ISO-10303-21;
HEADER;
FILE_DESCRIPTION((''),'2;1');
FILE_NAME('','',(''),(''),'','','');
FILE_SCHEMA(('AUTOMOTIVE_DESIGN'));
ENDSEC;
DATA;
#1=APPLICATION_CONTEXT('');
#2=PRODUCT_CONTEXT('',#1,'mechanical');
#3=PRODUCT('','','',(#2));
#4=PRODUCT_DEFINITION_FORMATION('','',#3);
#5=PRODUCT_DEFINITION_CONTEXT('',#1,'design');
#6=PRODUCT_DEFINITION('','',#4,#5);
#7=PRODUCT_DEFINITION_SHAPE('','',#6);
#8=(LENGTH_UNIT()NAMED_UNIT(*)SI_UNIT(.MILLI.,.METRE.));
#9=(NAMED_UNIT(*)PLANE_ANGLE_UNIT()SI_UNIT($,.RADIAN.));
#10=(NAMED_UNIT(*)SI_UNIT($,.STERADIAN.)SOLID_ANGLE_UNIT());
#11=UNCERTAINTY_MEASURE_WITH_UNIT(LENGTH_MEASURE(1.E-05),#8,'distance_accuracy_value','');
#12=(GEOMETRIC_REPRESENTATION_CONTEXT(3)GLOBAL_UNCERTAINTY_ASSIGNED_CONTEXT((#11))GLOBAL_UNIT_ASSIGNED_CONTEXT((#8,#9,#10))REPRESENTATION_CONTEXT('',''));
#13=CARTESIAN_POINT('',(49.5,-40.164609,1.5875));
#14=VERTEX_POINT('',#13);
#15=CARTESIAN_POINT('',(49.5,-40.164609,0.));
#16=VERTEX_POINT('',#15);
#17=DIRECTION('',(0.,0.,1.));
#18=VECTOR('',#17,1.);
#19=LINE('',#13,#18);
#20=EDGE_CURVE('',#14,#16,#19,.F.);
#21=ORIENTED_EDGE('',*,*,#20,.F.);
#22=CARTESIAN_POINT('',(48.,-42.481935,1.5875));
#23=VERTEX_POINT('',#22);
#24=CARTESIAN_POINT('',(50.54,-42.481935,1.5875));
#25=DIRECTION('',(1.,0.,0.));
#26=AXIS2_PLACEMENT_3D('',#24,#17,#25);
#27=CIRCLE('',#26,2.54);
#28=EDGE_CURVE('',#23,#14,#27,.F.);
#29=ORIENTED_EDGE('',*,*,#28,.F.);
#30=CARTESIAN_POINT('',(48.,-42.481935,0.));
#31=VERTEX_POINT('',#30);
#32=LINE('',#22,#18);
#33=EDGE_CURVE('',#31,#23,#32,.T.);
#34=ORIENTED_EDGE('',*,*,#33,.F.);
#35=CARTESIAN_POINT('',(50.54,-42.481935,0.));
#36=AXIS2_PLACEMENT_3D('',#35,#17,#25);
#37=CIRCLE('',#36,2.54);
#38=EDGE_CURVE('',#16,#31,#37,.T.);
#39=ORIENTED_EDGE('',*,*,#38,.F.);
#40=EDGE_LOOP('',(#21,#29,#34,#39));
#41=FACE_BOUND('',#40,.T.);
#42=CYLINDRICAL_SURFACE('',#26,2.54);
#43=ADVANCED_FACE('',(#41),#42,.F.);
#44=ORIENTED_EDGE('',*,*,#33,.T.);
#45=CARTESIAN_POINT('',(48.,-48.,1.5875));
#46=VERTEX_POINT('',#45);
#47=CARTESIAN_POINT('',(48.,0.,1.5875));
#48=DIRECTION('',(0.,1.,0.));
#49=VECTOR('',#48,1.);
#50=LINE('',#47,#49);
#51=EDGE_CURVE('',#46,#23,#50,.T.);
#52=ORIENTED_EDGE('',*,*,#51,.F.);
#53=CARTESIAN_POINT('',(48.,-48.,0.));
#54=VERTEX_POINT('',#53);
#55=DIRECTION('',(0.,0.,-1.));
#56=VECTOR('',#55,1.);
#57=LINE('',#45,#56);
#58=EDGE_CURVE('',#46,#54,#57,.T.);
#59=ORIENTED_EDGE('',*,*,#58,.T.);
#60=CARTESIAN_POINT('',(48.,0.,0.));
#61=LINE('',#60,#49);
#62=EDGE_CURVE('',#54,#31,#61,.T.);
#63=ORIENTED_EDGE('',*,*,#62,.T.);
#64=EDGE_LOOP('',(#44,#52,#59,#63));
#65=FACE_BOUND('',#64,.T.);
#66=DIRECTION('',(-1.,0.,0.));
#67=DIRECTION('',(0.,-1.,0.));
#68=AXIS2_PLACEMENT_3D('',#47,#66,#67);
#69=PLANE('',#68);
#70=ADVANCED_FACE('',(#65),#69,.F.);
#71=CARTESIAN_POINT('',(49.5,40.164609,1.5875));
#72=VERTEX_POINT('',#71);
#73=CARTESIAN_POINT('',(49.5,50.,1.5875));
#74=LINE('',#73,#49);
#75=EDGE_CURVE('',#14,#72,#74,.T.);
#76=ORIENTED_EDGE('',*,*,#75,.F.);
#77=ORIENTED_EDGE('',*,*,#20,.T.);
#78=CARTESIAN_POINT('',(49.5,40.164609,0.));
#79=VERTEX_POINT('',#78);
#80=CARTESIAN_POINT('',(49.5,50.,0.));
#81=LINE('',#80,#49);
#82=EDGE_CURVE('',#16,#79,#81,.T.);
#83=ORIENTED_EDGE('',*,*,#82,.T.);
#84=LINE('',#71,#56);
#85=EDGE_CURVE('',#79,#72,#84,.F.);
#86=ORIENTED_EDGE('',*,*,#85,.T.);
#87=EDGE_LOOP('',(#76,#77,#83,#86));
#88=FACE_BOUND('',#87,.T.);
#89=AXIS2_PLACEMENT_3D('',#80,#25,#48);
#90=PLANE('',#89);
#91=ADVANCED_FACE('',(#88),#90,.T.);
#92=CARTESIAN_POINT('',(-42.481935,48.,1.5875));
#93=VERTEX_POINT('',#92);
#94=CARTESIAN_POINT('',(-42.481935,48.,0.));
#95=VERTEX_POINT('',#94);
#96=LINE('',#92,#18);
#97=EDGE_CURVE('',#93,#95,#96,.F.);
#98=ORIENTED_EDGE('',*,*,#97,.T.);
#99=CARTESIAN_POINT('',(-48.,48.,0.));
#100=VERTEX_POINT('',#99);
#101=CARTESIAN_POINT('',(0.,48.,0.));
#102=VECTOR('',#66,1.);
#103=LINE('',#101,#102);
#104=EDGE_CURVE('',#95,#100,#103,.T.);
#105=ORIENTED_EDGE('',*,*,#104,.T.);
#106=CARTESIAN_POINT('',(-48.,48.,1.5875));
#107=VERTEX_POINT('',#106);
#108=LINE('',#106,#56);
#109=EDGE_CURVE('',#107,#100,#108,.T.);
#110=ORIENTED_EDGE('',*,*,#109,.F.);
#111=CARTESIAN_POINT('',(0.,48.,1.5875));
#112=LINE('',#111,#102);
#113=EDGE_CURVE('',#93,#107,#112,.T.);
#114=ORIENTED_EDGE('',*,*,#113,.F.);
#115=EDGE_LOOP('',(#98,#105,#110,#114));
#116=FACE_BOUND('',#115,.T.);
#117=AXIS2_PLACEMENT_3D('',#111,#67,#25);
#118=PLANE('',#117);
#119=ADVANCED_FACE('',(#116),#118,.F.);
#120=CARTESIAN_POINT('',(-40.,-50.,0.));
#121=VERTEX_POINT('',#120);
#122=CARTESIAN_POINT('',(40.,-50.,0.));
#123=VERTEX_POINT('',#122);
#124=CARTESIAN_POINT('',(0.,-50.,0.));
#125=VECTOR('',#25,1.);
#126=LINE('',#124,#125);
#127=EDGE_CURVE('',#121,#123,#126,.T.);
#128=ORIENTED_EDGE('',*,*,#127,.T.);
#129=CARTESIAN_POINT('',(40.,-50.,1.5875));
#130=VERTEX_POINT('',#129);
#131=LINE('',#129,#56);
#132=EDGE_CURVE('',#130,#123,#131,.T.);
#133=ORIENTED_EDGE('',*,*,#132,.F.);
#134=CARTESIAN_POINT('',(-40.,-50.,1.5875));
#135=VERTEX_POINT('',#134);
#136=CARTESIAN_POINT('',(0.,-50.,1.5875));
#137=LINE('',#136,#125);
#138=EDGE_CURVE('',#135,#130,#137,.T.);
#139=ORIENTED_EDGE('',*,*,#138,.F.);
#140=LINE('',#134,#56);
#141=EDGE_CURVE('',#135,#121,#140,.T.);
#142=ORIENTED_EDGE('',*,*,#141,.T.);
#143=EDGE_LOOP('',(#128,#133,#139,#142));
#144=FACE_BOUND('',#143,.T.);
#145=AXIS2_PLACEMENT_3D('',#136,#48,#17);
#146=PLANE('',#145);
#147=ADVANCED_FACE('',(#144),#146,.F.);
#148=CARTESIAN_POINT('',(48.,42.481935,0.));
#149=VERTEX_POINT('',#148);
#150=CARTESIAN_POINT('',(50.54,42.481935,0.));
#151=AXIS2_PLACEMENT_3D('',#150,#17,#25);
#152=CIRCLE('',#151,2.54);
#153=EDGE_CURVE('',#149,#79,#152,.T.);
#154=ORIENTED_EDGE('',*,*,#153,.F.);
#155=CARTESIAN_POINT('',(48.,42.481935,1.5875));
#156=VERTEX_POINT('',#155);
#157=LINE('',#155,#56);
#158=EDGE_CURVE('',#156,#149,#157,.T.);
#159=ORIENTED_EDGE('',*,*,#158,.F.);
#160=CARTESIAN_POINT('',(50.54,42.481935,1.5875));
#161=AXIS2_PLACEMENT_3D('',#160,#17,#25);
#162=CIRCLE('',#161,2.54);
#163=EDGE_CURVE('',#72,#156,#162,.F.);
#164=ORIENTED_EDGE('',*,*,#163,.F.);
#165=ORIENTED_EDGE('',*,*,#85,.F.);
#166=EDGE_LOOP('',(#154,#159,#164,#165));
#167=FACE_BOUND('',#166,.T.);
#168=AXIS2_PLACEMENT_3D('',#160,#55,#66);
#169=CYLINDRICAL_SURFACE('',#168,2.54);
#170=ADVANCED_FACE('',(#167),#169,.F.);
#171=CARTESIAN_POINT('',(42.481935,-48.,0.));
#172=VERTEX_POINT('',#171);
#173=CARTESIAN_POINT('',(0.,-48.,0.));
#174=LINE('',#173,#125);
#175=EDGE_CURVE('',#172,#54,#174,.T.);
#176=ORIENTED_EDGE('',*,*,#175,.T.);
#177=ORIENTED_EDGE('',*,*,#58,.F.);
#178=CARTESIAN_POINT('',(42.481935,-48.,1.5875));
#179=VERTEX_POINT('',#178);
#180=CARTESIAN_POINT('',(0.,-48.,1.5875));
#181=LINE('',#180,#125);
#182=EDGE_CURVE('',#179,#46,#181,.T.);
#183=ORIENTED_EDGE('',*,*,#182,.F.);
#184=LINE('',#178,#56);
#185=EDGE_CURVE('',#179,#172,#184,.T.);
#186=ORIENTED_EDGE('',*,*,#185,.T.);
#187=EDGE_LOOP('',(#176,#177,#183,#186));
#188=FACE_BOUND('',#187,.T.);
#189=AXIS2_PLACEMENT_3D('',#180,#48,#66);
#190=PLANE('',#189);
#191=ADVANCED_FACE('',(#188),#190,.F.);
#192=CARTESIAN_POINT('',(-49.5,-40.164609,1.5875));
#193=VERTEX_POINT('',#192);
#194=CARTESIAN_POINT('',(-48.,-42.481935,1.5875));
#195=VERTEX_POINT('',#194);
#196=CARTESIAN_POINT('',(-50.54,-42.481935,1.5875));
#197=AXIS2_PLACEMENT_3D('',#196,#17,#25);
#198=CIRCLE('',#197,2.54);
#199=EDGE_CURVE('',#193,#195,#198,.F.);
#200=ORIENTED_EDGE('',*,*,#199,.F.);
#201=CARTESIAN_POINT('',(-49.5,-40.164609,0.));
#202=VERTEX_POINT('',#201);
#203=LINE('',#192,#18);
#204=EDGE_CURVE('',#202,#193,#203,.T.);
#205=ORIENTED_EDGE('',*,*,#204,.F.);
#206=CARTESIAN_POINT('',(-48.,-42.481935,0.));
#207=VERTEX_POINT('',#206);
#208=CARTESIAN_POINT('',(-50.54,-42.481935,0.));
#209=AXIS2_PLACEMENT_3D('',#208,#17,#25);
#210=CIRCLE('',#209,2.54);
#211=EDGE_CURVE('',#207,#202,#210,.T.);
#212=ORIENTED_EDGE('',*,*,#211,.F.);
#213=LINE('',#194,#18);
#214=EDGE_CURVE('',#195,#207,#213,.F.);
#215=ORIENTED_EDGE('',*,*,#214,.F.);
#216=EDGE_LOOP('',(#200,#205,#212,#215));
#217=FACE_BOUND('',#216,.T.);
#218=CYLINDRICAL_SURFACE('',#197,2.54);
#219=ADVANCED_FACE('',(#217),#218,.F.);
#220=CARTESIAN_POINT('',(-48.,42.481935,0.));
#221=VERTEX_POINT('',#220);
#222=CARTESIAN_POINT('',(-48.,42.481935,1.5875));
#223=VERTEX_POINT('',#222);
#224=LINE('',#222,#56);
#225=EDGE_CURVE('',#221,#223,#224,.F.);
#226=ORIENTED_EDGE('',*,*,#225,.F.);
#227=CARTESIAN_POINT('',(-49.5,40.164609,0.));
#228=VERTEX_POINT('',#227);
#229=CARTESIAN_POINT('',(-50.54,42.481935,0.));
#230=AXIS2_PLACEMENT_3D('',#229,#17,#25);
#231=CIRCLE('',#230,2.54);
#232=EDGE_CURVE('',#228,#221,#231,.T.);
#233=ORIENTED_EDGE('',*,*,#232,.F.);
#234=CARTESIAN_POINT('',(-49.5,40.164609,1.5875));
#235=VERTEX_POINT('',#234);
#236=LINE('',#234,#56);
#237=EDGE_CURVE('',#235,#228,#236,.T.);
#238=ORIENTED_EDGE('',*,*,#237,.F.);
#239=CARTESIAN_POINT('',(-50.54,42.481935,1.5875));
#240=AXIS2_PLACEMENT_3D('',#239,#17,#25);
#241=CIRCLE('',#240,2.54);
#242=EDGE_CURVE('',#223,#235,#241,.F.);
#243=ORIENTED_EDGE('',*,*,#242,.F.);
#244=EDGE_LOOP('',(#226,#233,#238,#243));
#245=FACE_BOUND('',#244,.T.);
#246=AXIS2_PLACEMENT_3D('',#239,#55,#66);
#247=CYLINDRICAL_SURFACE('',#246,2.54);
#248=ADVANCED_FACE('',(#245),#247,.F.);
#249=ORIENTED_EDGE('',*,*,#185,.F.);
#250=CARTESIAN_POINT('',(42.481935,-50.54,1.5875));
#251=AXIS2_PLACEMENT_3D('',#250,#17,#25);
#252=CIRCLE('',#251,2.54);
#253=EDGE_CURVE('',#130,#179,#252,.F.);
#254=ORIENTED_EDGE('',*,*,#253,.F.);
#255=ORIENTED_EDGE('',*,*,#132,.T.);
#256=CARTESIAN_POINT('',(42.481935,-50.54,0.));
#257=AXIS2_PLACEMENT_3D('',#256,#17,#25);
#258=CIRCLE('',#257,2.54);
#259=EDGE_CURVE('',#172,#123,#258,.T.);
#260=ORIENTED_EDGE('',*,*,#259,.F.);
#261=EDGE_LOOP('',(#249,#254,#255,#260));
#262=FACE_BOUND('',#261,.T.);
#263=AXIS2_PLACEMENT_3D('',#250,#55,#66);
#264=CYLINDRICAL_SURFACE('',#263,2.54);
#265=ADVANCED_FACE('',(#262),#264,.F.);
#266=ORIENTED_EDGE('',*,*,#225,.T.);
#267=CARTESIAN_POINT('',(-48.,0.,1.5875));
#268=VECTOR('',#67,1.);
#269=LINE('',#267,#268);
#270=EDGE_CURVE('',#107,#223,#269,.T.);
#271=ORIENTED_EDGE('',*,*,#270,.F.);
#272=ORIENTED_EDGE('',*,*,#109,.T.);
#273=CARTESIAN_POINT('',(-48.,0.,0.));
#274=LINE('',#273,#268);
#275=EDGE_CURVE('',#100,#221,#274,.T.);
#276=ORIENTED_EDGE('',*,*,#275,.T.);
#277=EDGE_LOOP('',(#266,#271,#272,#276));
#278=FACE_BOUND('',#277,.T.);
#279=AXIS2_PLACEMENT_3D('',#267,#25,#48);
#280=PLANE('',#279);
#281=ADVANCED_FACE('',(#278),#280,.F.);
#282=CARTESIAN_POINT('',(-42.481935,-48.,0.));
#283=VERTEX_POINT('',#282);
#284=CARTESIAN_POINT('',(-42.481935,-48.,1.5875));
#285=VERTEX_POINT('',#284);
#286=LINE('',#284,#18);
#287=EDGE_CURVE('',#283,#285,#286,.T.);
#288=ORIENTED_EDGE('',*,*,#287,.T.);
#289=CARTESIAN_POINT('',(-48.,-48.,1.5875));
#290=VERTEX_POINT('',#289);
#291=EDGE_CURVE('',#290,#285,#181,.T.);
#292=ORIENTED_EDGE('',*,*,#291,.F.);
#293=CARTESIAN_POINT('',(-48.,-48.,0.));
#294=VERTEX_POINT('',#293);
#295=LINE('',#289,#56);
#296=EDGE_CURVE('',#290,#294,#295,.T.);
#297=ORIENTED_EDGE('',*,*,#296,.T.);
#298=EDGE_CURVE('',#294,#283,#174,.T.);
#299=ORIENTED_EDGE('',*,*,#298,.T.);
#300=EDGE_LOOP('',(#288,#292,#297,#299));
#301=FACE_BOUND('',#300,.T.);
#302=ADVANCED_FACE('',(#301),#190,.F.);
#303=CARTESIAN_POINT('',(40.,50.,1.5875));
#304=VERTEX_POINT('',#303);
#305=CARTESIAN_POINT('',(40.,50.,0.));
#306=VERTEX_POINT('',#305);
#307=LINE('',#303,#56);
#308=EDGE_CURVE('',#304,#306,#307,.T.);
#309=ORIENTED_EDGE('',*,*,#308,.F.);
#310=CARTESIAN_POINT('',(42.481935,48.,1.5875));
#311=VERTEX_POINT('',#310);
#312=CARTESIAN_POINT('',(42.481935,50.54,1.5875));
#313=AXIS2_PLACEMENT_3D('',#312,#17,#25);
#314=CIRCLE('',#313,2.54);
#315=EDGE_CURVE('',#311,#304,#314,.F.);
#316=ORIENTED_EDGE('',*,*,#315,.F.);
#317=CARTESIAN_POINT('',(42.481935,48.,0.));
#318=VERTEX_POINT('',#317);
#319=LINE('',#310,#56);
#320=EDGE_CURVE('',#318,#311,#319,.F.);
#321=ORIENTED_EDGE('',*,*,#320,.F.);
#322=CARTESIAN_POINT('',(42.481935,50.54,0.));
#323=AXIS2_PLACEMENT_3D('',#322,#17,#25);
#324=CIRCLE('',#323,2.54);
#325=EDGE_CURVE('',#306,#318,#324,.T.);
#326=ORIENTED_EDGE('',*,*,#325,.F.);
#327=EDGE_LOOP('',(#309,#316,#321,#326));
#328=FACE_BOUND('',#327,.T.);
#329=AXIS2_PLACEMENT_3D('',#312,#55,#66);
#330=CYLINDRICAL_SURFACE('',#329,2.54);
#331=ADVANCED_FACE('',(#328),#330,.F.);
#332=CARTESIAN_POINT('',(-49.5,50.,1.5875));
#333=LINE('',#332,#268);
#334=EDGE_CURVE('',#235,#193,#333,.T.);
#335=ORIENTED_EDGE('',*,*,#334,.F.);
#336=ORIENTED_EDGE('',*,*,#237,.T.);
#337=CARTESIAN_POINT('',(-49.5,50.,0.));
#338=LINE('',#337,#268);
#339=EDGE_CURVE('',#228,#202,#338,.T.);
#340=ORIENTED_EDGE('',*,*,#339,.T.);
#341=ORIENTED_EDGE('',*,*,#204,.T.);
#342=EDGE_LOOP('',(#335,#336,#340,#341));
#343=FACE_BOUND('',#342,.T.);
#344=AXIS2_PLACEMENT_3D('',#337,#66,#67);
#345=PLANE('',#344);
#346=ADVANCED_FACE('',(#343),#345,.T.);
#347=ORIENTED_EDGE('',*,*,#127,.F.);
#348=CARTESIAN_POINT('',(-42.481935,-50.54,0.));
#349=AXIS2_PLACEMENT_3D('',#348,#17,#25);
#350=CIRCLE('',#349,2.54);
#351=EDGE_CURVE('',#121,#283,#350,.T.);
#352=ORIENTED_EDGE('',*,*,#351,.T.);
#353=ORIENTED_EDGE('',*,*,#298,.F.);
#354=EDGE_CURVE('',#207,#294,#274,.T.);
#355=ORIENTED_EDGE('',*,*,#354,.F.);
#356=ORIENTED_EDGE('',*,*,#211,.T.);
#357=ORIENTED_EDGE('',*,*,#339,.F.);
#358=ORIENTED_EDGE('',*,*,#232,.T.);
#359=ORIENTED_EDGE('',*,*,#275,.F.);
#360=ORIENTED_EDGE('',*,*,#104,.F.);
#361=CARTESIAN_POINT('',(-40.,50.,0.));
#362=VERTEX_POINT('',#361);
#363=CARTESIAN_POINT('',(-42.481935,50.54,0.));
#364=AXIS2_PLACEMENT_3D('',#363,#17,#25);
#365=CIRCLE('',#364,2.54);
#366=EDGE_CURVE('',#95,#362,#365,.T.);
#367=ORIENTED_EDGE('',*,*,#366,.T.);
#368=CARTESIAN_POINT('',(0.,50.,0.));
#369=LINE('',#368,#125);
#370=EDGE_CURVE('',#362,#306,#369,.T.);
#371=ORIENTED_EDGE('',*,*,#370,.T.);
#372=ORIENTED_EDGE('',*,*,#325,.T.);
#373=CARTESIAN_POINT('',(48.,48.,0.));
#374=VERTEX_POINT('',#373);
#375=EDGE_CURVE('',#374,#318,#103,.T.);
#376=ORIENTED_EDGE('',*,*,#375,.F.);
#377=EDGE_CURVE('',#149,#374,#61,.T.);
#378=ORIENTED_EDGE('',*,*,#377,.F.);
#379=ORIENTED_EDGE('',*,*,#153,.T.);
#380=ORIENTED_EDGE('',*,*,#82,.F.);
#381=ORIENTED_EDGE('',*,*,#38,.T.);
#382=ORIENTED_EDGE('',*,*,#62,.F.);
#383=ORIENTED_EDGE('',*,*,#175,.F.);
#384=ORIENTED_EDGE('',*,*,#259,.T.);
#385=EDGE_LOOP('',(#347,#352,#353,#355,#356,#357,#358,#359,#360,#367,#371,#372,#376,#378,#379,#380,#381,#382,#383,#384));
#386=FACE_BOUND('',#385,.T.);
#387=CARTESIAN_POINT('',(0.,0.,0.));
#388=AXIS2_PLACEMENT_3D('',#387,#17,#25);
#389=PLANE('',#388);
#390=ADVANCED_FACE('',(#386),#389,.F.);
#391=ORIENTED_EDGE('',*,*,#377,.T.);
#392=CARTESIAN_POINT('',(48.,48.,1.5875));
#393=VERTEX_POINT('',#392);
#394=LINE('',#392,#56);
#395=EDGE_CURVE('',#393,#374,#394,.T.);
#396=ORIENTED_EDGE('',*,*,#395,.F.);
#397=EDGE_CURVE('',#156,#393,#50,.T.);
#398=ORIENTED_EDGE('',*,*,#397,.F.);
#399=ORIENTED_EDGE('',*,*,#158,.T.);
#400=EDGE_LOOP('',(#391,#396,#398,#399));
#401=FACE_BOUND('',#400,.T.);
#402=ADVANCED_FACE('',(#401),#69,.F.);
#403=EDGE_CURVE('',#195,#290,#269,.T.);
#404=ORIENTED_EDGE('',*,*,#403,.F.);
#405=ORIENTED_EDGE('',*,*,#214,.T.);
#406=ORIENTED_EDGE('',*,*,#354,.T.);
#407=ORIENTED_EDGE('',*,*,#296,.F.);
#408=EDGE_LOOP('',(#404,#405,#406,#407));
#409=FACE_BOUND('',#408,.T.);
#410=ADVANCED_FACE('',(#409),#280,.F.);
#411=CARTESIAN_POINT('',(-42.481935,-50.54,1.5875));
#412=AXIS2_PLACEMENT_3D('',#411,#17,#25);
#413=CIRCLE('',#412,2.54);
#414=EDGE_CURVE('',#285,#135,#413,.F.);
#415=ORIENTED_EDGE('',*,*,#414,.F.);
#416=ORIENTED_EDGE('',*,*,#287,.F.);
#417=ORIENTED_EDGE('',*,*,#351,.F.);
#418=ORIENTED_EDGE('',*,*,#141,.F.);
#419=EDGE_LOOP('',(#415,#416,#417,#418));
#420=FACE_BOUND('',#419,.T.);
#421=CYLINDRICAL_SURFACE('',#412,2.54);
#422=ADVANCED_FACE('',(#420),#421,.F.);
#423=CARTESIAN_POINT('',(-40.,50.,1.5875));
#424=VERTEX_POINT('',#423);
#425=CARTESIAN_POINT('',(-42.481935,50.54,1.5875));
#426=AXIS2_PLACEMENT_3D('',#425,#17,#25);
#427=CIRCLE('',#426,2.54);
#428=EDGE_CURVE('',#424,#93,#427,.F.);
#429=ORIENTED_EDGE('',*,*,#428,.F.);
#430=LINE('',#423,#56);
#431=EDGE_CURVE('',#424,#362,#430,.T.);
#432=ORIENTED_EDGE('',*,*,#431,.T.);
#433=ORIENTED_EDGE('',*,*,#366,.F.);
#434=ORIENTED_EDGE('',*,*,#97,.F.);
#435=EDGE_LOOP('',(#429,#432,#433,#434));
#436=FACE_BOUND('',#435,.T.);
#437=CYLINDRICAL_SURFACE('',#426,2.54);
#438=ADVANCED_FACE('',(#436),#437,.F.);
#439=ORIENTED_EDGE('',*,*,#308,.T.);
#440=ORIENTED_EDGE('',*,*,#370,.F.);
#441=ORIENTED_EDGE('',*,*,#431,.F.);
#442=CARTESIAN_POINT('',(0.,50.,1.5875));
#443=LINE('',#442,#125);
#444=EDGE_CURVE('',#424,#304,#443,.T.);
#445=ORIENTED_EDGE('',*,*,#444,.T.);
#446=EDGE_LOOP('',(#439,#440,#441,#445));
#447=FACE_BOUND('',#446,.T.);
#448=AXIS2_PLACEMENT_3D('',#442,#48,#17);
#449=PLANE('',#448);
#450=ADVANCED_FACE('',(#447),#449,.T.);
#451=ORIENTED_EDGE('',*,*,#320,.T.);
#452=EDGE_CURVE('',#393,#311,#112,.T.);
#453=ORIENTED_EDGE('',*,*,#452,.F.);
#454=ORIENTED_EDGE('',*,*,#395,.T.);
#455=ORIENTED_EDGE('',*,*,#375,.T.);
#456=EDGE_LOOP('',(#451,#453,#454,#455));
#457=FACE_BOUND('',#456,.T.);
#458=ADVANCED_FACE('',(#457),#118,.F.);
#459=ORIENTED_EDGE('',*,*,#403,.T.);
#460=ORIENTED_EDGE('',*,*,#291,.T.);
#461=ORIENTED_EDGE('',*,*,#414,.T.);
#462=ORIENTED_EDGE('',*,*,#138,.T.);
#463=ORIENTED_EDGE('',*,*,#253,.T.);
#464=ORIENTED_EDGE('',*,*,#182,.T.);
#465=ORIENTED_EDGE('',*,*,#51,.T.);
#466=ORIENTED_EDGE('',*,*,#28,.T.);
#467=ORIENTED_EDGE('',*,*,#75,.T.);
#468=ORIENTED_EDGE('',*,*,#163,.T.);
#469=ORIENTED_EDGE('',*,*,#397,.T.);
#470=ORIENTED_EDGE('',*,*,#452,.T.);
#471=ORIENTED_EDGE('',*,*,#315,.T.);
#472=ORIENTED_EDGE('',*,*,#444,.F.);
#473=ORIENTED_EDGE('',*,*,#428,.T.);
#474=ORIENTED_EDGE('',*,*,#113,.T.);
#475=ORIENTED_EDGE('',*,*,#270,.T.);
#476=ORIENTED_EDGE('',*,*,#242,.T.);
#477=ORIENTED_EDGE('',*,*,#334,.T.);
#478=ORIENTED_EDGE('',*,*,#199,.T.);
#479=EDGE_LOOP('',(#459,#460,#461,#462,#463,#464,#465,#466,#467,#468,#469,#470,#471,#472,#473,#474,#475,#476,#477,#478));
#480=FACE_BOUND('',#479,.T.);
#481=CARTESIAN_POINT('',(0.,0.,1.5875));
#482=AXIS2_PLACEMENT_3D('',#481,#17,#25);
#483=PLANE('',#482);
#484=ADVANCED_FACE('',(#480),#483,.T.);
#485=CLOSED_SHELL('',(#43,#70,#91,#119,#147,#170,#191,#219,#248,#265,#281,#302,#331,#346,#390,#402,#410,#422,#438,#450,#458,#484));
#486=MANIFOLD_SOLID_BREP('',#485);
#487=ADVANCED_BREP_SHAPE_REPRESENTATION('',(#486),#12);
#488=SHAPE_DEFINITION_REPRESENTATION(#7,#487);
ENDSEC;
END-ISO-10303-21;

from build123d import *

# Parameters (mm, degrees)
BOSS_EXTRUDE1_DEPTH = 1.5875
FILLET1_R           = 2.54
SKETCH6_OUTSIDE_W   = 130.286
SKETCH6_OUTSIDE_H   = 130.286
SKETCH6_OUTSIDE_W_2 = 99
SKETCH6_OUTSIDE_H_2 = 100
CUT_EXTRUDE2_DEPTH  = 71.728496069


with BuildPart() as part:
    # Sketch1 → Boss-Extrude1 (new body)
    with BuildSketch(Plane.XY):
        Polygon((40, 50), (-40, 50), (-40, 48), (-48, 48), (-48, 40), (-50, 40), (-50, -37.864895224), (-50, -40), (-48, -40), (-48, -48), (-40, -48), (-40, -50), (-37.864895224, -50), (40, -50), (40, -48), (48, -48), (48, -40), (50, -40), (50, 40), (48, 40), (48, 48), (40, 48), align=None)
    extrude(amount=BOSS_EXTRUDE1_DEPTH)

    # Fillet1
    # the kernel refuses this fillet: 2.54 mm, written as the material it adds along each edge
    with BuildSketch(Plane(origin=(-48, -40, 0), x_dir=(0, -1, 0), z_dir=(0, 0, 1)), Plane(origin=(40, -48, 0), x_dir=(1, 0, 0), z_dir=(0, 0, 1)), Plane(origin=(48, 40, 0), x_dir=(0, 1, 0), z_dir=(0, 0, 1)), Plane(origin=(-40, 48, 0), x_dir=(-1, 0, 0), z_dir=(0, 0, 1))) as fillet1_piece_1:
        with BuildLine():
            CenterArc((2.481934729, -2.54), FILLET1_R, 90, 77.725329785)
            Line((0, -2), (-0.049638695, -1.9892))
            ThreePointArc((-0.049638695, -1.9892), (-0.0508, -1), (-0.0508, 0))
            Line((-0.0508, 0), (0, 0.0508))
            Line((0, 0.0508), (2.481934729, 0.0508))
            Line((2.481934729, 0.0508), (2.481934729, 0))
        make_face()
    extrude(amount=1.5875)
    with BuildSketch(Plane(origin=(-40, -48, 0), x_dir=(-3.737454790095179e-12, -1.0, 0), z_dir=(0, 0, 1)), Plane(origin=(48, -40, 0), x_dir=(1.0, -3.7339020764163554e-12, 0), z_dir=(0, 0, 1)), Plane(origin=(-48, 40, 0), x_dir=(-1.0, 3.737454790095126e-12, 0), z_dir=(0, 0, 1))) as fillet1_piece_2:
        with BuildLine():
            CenterArc((2.54, -2.481934729), FILLET1_R, 102.274670215, 77.725329785)
            Line((0, -2.481934729), (-0.0508, -2.481934729))
            Line((-0.0508, -2.481934729), (-0.0508, 0))
            Line((-0.0508, 0), (0, 0.0508))
            ThreePointArc((0, 0.0508), (1, 0.0508), (1.9892, 0.049638695))
            Line((1.9892, 0.049638695), (2, 0))
        make_face()
    extrude(amount=1.5875)
    with BuildSketch(Plane(origin=(40, 48, 0), x_dir=(1, 0, 0), z_dir=(0, 0, 1))) as fillet1_piece_3:
        with BuildLine():
            CenterArc((2.481934729, 2.54), FILLET1_R, 192.274670215, 77.725329785)
            Line((0, 2), (-0.049638695, 1.9892))
            ThreePointArc((-0.049638695, 1.9892), (-0.0508, 1), (-0.0508, 0))
            Line((-0.0508, 0), (0, -0.0508))
            Line((0, -0.0508), (2.481934729, -0.0508))
            Line((2.481934729, -0.0508), (2.481934729, 0))
        make_face()
    extrude(amount=1.5875)

    # Sketch6 outside → Cut-Extrude2 (cut, through all)
    with BuildSketch(Plane.XY.offset(1.5875)):
        Rectangle(SKETCH6_OUTSIDE_W, SKETCH6_OUTSIDE_H)
        Rectangle(SKETCH6_OUTSIDE_W_2, SKETCH6_OUTSIDE_H_2, mode=Mode.SUBTRACT)
    extrude(amount=-CUT_EXTRUDE2_DEPTH, mode=Mode.SUBTRACT)


solid = part.part
